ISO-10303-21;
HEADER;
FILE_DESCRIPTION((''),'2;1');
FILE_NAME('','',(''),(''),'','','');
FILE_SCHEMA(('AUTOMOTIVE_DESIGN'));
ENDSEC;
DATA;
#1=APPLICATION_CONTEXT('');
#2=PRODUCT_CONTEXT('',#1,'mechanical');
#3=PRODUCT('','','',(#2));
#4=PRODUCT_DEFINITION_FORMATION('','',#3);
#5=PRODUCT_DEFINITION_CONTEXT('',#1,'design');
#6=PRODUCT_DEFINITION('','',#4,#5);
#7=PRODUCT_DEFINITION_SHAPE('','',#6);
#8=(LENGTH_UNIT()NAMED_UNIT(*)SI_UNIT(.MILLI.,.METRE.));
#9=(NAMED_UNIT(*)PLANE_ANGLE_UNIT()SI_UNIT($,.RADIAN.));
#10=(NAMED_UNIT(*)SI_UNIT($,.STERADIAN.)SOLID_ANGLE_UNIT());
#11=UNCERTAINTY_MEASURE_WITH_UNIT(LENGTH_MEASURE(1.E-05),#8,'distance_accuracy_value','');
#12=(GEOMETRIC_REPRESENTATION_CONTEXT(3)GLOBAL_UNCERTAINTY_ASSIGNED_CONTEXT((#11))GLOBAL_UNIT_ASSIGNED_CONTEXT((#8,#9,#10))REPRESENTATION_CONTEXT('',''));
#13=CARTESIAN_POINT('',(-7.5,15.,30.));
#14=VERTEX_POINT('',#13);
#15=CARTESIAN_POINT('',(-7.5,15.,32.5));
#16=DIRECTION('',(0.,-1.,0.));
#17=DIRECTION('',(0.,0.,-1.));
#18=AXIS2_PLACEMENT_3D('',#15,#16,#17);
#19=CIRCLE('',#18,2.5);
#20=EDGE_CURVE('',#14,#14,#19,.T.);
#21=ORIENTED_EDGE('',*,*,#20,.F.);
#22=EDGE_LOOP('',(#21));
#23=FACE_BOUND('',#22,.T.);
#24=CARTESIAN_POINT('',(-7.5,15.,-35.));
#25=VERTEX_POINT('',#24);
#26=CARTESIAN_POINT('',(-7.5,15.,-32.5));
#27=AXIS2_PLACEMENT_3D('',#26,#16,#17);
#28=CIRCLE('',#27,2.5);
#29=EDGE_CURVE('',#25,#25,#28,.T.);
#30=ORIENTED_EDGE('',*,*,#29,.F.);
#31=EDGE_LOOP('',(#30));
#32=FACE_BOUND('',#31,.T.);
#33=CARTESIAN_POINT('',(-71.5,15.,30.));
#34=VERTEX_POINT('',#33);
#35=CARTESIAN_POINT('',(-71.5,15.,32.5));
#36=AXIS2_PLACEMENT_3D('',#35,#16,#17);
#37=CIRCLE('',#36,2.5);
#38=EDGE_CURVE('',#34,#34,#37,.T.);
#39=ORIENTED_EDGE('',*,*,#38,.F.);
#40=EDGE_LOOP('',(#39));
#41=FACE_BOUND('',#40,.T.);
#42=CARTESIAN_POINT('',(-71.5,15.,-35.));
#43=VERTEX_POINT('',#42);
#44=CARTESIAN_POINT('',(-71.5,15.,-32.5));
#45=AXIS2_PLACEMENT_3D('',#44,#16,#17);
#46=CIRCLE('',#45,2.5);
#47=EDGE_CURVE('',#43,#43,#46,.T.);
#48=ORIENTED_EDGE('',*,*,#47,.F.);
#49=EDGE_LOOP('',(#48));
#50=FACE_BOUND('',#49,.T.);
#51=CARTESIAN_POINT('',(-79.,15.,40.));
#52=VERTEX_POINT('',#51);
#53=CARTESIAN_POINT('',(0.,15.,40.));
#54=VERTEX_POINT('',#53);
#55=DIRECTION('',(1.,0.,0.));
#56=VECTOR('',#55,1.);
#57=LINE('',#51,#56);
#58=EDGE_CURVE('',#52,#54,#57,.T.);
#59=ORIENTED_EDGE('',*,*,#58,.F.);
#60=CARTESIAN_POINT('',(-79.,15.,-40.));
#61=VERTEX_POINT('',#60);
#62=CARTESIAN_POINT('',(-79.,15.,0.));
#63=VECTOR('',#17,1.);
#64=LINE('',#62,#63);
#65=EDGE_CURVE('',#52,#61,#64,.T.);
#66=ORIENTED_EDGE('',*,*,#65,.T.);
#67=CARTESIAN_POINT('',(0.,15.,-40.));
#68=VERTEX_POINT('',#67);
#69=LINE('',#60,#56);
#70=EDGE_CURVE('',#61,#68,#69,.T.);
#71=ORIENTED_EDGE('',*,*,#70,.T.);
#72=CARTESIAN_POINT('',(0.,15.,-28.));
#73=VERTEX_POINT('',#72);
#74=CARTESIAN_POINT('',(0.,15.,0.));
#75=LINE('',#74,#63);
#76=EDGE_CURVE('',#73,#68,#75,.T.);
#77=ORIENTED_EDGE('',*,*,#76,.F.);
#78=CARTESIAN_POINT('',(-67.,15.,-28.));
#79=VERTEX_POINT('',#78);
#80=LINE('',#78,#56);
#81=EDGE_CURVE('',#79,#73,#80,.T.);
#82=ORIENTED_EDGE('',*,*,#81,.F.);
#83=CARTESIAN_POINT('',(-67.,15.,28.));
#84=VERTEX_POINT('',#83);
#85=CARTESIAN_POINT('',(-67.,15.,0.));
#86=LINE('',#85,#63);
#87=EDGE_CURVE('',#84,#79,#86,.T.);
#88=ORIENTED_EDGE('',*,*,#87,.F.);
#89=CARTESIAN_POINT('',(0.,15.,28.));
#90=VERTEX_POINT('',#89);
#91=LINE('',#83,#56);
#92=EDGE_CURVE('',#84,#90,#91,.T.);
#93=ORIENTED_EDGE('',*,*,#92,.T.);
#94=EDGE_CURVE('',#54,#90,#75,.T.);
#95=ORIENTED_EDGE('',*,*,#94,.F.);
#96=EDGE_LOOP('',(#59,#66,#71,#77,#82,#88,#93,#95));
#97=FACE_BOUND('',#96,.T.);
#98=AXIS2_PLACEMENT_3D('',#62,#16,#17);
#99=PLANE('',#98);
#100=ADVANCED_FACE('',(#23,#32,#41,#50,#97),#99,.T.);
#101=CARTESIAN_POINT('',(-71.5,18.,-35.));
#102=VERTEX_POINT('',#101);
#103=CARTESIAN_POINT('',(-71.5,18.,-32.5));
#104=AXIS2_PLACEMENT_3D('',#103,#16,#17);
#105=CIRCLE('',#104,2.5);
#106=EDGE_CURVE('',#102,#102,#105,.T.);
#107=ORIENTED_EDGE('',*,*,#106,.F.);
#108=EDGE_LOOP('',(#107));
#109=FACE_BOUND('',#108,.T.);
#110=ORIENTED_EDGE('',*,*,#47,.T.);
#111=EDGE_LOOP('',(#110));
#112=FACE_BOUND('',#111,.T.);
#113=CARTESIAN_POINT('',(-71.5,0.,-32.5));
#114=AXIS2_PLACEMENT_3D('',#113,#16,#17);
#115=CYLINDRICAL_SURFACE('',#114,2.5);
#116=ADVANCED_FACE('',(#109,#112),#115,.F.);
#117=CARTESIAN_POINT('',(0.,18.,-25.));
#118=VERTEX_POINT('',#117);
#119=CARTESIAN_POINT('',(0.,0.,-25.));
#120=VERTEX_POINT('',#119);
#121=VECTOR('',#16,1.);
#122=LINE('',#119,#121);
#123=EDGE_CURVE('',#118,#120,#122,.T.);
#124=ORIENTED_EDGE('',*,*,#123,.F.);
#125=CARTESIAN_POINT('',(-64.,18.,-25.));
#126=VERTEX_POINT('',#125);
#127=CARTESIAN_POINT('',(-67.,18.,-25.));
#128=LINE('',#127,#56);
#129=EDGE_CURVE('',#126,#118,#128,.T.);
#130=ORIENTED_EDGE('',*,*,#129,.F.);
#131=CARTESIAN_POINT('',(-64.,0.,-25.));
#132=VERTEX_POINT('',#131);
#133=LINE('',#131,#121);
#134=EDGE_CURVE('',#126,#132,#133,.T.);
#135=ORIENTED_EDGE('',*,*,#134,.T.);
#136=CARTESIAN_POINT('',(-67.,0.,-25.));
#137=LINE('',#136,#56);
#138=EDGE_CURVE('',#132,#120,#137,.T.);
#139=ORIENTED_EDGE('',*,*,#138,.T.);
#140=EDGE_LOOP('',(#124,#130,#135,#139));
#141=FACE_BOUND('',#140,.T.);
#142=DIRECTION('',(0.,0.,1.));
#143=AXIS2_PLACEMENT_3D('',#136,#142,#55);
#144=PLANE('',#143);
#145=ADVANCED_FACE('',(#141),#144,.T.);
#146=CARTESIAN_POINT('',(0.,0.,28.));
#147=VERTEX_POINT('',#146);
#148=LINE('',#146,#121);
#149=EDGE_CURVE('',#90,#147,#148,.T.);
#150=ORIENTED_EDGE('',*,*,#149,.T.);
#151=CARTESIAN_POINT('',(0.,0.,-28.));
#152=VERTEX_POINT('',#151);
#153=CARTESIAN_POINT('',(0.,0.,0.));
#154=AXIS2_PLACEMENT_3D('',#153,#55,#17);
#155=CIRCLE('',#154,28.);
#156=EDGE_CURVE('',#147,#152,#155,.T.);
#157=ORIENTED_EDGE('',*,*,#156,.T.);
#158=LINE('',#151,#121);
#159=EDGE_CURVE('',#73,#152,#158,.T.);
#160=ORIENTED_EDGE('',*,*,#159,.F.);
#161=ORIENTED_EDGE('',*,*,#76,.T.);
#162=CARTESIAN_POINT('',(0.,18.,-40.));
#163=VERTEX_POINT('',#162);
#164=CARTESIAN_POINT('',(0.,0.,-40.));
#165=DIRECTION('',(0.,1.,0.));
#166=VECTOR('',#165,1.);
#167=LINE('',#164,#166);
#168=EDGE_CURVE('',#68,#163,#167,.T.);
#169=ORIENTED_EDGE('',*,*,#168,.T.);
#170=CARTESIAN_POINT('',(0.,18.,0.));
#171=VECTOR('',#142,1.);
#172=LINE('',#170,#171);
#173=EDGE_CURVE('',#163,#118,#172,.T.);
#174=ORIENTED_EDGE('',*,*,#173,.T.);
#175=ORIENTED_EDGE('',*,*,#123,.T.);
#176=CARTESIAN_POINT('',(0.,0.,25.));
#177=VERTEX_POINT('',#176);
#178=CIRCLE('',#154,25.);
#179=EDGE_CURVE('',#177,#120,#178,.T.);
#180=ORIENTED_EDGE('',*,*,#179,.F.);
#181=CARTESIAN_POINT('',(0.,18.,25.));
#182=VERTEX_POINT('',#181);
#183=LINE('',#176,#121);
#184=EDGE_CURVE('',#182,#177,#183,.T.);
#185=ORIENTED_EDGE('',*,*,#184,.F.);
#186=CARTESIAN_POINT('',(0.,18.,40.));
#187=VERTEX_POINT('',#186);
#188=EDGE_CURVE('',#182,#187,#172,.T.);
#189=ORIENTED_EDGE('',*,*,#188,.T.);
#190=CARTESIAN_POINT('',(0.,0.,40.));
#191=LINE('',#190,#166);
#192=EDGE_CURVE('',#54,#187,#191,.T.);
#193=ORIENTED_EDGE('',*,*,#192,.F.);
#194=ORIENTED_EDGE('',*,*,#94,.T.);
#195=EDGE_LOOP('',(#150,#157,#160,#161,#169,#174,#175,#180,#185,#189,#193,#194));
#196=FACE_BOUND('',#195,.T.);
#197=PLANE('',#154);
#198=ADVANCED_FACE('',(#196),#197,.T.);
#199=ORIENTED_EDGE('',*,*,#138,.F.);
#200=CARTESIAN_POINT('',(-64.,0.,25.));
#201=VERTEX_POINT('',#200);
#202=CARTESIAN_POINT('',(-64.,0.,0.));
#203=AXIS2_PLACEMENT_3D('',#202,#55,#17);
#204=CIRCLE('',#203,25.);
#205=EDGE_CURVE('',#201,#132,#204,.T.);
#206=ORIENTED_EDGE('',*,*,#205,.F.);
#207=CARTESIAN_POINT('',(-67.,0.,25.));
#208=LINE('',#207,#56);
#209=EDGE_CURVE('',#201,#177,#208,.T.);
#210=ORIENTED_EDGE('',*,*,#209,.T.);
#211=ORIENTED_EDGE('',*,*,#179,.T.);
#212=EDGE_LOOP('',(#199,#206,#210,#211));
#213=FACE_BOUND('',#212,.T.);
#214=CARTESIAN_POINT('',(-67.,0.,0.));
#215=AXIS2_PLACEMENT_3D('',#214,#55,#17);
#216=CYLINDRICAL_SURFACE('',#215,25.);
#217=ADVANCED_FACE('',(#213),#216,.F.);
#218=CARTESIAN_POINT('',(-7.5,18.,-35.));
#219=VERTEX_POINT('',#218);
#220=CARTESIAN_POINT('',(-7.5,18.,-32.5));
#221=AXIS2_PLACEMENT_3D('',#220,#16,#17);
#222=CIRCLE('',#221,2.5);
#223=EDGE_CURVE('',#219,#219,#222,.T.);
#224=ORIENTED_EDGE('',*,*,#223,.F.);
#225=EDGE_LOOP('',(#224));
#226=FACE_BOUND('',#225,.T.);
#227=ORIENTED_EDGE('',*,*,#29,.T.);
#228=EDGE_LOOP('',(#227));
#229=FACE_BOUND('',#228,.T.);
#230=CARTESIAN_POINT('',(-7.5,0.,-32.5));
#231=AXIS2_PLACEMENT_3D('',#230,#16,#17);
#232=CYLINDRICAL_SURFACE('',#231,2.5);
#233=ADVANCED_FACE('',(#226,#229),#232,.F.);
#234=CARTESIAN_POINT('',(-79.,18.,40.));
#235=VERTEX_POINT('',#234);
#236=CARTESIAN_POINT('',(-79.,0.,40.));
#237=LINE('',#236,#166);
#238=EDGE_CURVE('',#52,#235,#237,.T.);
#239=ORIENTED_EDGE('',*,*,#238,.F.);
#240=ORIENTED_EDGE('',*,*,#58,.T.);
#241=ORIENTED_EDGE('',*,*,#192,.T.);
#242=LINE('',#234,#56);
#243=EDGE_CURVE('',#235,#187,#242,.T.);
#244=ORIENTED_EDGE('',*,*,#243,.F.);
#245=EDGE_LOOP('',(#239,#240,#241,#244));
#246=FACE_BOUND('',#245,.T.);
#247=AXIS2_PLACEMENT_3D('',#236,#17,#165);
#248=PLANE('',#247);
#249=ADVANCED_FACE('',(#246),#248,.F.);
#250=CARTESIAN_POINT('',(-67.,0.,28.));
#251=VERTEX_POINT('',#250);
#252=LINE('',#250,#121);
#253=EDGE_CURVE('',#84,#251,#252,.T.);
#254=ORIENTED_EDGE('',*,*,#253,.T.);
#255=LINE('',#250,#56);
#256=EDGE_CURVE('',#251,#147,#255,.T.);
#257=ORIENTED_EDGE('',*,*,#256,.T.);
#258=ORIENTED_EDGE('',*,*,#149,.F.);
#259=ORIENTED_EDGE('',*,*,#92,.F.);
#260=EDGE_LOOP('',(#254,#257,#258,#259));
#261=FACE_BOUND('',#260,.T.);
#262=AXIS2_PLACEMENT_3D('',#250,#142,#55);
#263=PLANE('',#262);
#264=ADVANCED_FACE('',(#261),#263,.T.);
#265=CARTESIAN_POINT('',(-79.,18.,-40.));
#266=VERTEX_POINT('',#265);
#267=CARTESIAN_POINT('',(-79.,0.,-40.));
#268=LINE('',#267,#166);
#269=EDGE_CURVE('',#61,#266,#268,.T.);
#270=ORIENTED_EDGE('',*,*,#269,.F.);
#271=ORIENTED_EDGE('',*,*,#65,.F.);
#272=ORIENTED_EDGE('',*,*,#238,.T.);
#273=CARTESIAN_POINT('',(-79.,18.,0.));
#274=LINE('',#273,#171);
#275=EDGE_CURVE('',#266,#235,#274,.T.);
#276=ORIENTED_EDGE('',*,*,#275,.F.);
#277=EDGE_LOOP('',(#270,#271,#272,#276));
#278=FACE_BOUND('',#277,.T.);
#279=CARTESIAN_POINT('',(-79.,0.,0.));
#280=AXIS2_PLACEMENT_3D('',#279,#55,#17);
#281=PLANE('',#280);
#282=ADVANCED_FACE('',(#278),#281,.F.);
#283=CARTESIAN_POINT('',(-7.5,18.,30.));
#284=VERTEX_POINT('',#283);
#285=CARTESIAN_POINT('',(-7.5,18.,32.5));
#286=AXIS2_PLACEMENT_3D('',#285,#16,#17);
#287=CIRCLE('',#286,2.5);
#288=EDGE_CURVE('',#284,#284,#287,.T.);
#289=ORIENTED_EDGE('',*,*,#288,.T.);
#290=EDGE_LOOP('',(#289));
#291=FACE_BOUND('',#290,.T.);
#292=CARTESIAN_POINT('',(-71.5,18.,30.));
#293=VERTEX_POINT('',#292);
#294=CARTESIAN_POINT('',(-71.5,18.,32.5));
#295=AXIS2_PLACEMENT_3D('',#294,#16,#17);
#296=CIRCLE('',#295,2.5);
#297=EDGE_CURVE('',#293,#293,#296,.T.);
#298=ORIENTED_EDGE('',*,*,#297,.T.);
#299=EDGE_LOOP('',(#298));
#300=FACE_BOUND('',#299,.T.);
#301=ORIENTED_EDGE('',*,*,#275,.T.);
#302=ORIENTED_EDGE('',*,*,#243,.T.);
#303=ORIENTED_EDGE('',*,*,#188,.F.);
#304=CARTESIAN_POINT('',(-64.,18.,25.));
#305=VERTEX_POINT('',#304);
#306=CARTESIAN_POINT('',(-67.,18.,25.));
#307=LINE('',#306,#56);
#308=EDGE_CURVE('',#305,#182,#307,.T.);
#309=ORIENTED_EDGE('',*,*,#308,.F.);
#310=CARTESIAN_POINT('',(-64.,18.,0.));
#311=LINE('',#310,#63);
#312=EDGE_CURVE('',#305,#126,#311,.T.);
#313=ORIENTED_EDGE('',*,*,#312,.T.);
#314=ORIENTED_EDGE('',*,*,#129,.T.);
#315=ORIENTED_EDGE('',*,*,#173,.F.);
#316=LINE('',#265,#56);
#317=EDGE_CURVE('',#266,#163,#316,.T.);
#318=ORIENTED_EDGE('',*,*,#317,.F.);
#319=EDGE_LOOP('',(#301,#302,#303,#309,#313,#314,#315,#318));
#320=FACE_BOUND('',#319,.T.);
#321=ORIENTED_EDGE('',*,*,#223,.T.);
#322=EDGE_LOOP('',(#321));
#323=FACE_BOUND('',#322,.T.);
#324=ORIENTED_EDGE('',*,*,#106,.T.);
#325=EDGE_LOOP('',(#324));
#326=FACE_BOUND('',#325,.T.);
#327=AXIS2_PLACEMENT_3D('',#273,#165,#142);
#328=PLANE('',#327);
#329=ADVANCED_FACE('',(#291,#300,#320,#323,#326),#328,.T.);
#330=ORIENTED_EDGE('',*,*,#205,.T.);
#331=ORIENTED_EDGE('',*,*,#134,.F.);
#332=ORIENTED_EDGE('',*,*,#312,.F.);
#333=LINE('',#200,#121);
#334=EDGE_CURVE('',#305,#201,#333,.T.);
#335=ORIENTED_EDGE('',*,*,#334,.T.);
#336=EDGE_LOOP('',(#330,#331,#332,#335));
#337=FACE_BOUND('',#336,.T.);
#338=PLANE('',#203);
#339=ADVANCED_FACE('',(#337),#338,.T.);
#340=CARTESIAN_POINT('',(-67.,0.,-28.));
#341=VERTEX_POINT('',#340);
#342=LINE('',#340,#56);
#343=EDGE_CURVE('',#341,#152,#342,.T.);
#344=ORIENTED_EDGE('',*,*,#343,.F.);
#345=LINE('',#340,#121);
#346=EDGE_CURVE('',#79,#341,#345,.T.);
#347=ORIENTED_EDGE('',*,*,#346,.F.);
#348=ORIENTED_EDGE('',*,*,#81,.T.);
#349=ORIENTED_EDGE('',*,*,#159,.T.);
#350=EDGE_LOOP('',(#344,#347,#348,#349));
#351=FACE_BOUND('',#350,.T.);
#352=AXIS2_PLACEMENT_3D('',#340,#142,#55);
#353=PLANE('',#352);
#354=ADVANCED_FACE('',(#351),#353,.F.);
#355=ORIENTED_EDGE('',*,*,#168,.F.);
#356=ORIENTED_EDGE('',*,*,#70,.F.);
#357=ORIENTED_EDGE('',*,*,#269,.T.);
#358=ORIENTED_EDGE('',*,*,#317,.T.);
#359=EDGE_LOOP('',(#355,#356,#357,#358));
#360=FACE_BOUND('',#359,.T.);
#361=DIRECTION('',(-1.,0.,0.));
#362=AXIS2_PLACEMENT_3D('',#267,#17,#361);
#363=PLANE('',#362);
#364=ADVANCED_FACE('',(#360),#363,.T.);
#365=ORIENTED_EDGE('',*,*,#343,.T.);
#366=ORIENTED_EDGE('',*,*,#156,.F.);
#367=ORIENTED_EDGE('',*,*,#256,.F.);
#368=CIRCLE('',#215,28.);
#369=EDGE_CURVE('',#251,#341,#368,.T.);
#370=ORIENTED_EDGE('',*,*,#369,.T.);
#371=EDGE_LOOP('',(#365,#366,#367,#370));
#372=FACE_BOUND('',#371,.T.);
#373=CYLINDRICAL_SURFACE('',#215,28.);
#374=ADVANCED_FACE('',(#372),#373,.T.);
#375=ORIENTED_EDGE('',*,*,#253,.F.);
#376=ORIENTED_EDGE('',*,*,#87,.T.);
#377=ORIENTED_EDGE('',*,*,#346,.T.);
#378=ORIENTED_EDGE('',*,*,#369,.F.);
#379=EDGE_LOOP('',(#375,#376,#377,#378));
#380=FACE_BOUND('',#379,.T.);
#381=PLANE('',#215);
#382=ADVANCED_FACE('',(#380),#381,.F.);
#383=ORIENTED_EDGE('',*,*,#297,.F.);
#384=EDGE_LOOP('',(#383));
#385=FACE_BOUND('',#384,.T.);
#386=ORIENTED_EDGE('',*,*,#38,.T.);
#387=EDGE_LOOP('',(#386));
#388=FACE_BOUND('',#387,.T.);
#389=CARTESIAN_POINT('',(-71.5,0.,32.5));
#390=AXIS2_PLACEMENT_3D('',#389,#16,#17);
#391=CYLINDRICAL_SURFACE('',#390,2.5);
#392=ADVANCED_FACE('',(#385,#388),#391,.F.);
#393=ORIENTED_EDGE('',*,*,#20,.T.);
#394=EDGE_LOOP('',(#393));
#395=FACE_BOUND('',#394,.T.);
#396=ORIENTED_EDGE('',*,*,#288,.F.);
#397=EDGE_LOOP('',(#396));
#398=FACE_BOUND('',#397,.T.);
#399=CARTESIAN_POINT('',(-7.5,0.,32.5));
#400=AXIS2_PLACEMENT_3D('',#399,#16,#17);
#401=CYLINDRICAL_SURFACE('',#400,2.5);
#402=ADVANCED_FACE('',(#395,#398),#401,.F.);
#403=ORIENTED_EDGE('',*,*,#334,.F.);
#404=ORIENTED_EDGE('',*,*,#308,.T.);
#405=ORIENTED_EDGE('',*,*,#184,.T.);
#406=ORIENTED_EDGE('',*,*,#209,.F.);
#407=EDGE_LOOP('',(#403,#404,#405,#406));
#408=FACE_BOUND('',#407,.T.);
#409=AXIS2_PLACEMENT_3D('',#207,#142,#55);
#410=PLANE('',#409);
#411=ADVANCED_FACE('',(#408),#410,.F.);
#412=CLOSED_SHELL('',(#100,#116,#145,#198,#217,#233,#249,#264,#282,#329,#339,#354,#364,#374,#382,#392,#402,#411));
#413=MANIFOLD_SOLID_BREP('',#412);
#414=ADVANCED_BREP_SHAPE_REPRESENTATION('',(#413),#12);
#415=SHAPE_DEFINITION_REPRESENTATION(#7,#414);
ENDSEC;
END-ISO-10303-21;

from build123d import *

# Parameters (mm, degrees)
TUBE_CLAMP_BASE_EXTRUDE_DEPTH           = 67
TUBE_CLAMP_MOUNTING_PLATE_EXTRUDE_DEPTH = 79
INNER_START                             = -64
INNER_SHELL_DEPTH                       = 64
F_5_0MM_DOWEL_HOLE1_D                   = 5


# Read off the part's stored shape, not the designer's step: Inner Shell
with BuildPart() as part:
    # Tube Clamp Profile → Tube Clamp Base Extrude (new body)
    with BuildSketch(Plane(origin=(0, 0, 0), x_dir=(0, 0, -1), z_dir=(1, 0, 0))):
        with BuildLine():
            Line((-28, 15), (-28, 0))
            ThreePointArc((-28, 0), (0, -28), (28, 0))
            Line((28, 0), (28, 15))
            Line((28, 15), (-28, 15))
        make_face()
    extrude(amount=-TUBE_CLAMP_BASE_EXTRUDE_DEPTH)

    # Sketch1<3> → Tube Clamp Mounting Plate Extrude (add)
    with BuildSketch(Plane(origin=(0, 0, 0), x_dir=(0, 0, -1), z_dir=(1, 0, 0))):
        Polygon((40, 15), (40, 18), (-40, 18), (-40, 15), (-28, 15), (28, 15), align=None)
    extrude(amount=-TUBE_CLAMP_MOUNTING_PLATE_EXTRUDE_DEPTH)

    # Inner Shell outline → Inner Shell (cut)
    with BuildSketch(Plane.YZ.offset(INNER_START)):
        with BuildLine():
            Line((18, -25), (18, 25))
            Line((18, 25), (0, 25))
            ThreePointArc((0, 25), (-25, 0), (0, -25))
            Line((0, -25), (18, -25))
        make_face()
    extrude(amount=INNER_SHELL_DEPTH, mode=Mode.SUBTRACT)

    # Ø5.0mm Dowel Hole1 (through all)
    with Locations(Plane.XZ):
        with Locations((-7.5, -32.5), (-71.5, 32.5), (-7.5, 32.5), (-71.5, -32.5)):
            Hole(F_5_0MM_DOWEL_HOLE1_D / 2)


solid = part.part
